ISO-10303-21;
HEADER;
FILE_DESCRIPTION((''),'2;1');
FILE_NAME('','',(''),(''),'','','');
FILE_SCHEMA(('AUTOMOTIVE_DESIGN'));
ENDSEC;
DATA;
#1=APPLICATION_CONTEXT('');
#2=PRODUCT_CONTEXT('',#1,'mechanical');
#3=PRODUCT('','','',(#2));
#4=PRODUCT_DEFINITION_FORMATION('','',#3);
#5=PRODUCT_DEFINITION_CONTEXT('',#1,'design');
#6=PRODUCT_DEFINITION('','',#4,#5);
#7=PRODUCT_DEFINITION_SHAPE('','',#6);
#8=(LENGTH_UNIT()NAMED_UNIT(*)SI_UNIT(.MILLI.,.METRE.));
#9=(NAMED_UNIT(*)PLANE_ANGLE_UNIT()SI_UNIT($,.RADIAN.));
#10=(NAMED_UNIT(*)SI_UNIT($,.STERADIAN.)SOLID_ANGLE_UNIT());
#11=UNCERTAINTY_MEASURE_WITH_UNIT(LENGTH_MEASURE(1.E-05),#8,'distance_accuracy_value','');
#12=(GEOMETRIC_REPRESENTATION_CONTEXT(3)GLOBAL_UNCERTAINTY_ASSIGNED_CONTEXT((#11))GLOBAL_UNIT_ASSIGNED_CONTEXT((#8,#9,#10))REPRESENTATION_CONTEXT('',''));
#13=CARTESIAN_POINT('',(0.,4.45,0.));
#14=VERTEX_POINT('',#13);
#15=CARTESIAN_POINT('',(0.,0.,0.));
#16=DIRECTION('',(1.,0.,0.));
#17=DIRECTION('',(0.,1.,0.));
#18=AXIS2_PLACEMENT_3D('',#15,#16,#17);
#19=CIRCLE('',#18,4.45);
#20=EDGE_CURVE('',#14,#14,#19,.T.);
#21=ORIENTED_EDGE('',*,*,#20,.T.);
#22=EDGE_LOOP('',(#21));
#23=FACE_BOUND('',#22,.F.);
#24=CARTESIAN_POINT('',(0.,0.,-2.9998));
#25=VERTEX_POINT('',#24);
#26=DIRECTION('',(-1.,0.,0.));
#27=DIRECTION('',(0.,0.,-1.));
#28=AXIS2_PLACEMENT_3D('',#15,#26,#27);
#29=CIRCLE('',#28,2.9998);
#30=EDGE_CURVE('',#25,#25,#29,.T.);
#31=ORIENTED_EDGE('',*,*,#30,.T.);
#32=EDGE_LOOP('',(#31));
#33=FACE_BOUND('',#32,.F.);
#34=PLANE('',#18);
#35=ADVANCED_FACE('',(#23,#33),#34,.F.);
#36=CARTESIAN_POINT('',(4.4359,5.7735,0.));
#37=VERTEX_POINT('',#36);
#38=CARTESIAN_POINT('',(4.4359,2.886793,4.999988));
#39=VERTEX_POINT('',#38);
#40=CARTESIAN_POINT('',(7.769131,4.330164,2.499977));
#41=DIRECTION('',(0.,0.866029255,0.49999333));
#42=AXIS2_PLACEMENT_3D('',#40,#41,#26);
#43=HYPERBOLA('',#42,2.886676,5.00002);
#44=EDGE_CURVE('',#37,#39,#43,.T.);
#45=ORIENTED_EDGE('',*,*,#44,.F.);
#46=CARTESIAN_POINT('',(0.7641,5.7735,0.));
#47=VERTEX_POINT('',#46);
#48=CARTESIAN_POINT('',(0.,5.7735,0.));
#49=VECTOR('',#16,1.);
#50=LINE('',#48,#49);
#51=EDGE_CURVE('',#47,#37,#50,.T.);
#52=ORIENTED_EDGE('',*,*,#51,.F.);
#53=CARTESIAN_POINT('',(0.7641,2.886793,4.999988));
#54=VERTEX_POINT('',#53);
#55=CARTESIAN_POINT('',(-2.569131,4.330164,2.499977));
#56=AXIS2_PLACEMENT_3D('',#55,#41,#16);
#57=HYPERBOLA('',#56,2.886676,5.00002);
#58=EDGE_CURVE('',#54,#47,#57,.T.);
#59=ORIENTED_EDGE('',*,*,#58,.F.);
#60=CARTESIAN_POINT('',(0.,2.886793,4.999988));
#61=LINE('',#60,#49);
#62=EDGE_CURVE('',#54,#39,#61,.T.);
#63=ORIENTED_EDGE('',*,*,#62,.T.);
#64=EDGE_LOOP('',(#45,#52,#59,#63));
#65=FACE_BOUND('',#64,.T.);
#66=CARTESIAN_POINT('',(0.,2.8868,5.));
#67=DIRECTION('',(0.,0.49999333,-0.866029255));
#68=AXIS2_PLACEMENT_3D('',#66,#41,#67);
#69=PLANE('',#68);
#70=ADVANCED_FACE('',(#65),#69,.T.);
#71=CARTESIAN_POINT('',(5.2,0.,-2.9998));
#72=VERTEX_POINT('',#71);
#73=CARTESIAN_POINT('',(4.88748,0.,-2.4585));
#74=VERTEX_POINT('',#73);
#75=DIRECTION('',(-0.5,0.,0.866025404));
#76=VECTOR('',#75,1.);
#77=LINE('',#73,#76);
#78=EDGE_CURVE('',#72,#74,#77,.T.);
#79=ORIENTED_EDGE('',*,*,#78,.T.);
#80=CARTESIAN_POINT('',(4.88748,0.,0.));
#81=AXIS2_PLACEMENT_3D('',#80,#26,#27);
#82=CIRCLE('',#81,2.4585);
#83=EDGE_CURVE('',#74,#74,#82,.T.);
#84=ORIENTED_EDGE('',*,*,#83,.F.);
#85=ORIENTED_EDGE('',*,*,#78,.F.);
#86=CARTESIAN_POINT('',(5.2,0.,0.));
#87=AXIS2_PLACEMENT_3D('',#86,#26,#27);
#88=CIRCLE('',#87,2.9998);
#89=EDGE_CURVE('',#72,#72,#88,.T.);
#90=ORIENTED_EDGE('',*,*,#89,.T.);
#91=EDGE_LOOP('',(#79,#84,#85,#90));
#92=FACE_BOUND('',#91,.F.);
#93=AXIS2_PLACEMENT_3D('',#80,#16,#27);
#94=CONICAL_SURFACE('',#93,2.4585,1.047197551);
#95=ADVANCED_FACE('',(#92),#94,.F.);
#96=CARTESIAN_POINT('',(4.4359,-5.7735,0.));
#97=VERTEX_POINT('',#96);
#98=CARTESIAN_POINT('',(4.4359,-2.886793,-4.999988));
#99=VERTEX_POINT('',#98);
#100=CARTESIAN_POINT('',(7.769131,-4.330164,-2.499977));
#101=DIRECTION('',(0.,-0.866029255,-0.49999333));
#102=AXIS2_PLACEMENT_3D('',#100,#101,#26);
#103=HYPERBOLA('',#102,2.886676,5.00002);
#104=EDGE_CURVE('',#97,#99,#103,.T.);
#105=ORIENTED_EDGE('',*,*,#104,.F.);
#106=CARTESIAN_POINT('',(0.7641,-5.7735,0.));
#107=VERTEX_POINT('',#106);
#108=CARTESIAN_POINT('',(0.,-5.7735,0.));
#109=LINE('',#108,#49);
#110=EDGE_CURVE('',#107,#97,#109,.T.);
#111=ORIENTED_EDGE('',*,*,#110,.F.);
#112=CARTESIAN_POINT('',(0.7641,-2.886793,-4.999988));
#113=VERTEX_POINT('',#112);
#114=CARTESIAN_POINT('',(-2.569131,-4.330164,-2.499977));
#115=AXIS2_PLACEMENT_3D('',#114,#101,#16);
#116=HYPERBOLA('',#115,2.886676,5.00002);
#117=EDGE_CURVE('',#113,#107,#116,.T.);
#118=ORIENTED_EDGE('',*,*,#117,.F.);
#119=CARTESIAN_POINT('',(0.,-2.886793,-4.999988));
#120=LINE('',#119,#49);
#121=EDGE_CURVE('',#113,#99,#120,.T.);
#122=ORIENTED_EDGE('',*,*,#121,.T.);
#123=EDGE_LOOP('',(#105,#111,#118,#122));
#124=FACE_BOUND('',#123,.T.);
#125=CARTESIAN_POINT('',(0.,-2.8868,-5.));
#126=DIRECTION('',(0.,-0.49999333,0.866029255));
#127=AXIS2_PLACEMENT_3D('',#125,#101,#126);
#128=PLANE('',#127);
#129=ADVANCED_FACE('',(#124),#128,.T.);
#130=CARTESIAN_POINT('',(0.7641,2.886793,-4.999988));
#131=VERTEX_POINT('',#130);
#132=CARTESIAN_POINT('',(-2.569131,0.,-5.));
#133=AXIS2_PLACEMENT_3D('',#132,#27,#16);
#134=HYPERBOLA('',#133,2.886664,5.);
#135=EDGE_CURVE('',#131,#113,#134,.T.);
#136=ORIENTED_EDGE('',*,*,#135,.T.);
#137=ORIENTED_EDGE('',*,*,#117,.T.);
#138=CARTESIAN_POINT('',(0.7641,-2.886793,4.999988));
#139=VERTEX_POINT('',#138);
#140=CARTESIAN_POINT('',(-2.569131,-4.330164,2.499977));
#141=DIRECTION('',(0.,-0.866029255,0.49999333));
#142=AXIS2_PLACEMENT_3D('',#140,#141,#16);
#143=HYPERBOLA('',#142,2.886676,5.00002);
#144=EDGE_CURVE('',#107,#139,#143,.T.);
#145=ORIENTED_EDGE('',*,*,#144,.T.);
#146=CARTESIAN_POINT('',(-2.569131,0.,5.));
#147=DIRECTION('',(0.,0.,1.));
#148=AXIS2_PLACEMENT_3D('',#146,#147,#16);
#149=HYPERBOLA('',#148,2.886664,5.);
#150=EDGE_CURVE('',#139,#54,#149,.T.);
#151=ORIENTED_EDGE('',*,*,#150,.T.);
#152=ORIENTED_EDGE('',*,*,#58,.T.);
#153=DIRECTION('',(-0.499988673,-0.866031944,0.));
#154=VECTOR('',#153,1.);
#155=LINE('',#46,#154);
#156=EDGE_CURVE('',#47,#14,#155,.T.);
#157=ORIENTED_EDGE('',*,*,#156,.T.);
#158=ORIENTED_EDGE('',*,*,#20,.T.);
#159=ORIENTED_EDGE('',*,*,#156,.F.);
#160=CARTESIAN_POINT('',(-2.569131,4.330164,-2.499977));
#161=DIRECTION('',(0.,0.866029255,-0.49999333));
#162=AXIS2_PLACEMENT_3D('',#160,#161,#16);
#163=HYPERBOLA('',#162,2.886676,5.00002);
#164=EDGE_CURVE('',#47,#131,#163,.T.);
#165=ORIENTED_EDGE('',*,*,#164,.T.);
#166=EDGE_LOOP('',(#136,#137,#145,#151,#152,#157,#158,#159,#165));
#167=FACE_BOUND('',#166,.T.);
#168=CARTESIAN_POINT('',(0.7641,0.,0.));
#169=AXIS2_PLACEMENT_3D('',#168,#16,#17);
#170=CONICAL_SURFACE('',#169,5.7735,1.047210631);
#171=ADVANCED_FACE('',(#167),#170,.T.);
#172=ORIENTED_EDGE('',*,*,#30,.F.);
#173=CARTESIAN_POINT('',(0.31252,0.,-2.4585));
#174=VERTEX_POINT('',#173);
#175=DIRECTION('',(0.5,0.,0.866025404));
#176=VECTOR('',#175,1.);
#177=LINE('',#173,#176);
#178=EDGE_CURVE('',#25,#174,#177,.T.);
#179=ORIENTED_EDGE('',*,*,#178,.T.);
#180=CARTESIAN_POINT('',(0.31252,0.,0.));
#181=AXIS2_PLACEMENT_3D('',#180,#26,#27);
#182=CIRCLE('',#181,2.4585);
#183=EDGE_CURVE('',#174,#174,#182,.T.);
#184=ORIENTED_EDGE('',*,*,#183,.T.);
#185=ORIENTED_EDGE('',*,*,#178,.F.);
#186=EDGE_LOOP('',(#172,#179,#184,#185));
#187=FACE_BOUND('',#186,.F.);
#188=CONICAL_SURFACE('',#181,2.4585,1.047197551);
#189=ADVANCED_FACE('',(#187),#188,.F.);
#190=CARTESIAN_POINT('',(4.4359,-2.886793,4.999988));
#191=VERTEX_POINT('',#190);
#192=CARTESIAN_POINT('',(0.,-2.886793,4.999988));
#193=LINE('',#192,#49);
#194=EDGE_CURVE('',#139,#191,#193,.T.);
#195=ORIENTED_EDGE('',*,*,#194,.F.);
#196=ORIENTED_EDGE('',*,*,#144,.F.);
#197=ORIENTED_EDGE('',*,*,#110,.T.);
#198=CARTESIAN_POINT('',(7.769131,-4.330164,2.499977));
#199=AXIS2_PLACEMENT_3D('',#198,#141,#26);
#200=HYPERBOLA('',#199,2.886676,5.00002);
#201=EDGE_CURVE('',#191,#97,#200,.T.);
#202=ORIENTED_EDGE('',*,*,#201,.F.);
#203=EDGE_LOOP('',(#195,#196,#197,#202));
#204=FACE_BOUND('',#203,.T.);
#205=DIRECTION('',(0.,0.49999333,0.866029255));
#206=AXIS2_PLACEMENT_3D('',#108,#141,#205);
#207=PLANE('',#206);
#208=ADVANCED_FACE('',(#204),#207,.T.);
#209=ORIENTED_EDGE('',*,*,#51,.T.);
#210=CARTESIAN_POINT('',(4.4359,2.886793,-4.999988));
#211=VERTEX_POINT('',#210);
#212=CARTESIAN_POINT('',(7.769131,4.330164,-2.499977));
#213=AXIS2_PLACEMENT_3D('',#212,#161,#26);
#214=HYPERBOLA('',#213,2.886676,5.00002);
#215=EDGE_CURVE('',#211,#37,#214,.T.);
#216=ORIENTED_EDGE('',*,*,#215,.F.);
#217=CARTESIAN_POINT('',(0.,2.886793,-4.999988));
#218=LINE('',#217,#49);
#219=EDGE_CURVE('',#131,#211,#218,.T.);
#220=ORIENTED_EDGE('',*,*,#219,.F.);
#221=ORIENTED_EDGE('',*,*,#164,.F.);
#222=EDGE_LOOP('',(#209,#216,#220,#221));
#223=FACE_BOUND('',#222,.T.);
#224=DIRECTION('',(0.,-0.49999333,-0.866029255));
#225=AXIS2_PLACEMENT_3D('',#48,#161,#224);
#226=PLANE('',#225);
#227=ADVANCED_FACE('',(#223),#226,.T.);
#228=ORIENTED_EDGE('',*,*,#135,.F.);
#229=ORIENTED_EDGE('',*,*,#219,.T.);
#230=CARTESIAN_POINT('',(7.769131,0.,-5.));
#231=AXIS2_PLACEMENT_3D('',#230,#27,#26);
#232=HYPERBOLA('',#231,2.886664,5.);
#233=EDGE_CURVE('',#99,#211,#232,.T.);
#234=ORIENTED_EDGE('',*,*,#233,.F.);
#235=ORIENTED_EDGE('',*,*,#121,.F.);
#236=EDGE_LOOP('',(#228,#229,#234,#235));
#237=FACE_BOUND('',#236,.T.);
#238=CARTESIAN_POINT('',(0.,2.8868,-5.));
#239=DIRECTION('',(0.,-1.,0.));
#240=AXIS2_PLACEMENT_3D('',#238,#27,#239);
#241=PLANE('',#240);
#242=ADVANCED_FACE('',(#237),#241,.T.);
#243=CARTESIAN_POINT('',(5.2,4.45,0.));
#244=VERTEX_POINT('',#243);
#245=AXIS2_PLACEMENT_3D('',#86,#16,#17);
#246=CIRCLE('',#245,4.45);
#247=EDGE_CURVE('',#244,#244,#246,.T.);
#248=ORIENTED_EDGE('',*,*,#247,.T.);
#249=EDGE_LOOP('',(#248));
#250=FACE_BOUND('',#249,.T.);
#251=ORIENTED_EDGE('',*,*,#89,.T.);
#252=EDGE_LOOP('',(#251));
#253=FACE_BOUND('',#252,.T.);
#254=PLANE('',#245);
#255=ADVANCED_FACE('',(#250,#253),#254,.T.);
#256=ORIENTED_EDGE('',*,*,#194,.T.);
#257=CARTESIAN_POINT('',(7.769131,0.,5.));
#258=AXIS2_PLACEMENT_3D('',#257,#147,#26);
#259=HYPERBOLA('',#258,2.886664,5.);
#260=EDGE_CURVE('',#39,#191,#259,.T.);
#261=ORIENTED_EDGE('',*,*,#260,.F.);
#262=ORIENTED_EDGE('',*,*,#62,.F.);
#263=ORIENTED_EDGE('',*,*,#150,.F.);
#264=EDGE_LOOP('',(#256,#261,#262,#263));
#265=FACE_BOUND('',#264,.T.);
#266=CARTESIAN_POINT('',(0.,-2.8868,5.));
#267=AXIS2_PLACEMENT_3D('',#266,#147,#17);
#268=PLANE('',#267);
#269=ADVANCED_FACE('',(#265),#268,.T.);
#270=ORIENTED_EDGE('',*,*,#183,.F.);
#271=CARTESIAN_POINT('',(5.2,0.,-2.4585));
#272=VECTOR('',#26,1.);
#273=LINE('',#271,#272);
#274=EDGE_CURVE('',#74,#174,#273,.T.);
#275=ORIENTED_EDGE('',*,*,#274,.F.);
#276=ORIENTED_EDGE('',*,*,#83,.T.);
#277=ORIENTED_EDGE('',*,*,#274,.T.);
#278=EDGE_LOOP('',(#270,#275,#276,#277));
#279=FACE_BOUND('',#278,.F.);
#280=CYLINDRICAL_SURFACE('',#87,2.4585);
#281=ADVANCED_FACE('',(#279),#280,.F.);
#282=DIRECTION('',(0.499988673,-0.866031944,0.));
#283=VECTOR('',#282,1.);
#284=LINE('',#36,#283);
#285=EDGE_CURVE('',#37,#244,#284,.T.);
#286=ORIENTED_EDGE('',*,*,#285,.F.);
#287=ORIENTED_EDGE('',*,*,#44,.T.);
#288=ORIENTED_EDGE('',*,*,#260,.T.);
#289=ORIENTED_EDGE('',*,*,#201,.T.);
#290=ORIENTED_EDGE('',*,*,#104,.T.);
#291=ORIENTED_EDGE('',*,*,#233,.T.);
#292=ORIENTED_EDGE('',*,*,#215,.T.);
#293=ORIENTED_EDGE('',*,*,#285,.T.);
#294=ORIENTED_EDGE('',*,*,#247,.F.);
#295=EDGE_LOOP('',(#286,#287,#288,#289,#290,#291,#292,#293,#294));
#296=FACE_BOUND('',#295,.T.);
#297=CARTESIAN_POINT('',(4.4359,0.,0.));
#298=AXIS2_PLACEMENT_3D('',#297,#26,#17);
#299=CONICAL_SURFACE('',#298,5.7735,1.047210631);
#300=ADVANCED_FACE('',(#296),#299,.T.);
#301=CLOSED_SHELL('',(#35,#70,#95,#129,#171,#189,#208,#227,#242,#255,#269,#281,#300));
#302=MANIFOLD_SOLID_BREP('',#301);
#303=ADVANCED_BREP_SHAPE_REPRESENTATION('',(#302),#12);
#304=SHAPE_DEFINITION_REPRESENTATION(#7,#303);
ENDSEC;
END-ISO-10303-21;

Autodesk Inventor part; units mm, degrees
ref_plane "YZ Plane" through (0, 0, 0) normal (1, 0, 0) x (0, 1, 0)
ref_plane "XZ Plane" through (0, 0, 0) normal (0, 1, 0) x (-1, 0, 0)
sketch "Sketch1" plane through (0, 0, 0) normal (1, 0, 0) x (0, 1, 0)
  line L0 (-5.7735, 0) -> (-2.8868, 5)
  line L1 (-2.8868, 5) -> (2.8868, 5)
  line L2 (2.8868, 5) -> (5.7735, 0)
  line L3 (5.7735, 0) -> (2.8868, -5)
  line L4 (2.8868, -5) -> (-2.8868, -5)
  line L5 (-2.8868, -5) -> (-5.7735, 0)
  point P0 (0, 0)
  point P1 (0, 0)
  dimension "d0" = 11.547
extrude "Body" add sketch "Sketch1" along normal blind 5.2
sketch "Sketch2" plane through (0, 0, 0) normal (0, 0, 1) x (1, 0, 0)
  line L0 (0, 2.8868) -> (0, 5.7735) projected
  line L1 (0, 5.7735) -> (5.2, 5.7735) projected
  line L2 (5.2, 2.8868) -> (5.2, 5.7735) projected
  line L3 (-1.04, 0) -> (6.24, 0) projected
  line L4 (0.7641, 5.7735) -> (0, 4.45)
  line L5 (4.4359, 5.7735) -> (5.2, 4.45)
  dimension "d3" = 30
  dimension "d4" = 30
  dimension "d5" = 8.9
  dimension "d6" = 8.9
revolve "Chamfer1" cut sketch "Sketch2" angle 360 about axis through (-10, 0, 0) along (1, 0, 0)
sketch "Sketch3" plane through (5.2, 0, 0) normal (1, 0, 0) x (0, 0, -1)
  arc A0 (-0.625, -1.0825) -> (0.625, -1.0825) centre (0, 0) ccw projected
hole "Thread" at (5.2, 0, 0) direction (-1, 0, 0) diameter 4.917 end through all thread size "M6x1" class "6H" standard "ISO Metric profile"
chamfer "Chamfer2" distance 0.5413 angle 30 1 edges at (5.2, 0, 2.4585) measured on face at (5.2, 3.7371, -0.4538)
chamfer "Chamfer3" distance 0.5413 angle 30 1 edges at (0, 0, 2.4585) measured on face at (0, 3.7371, -0.4538)
ref_plane "Work Plane1" through (-10.9812, 0, 0) normal (0, -0.8660254, -0.5) x (1, 0, 0)
equation "\"d0\" = 1.1547 * SW"
equation "\"d1\" = KOH"
equation "\"d3\" = ANG1"
equation "\"d4\" = ANG2"
equation "\"d5\" = SW0"
equation "\"d6\" = SW01"
equation "\"d8\" = -0.5 * GD1 + 0.5 * NND"
equation "\"d40\" = -0.5 * GD1 + 0.5 * NND"
equation "\"d10\" = -0.5 * GD1 + 0.5 * NND"
equation "\"d41\" = -0.5 * GD1 + 0.5 * NND"
equation "\"ANG1\" = 30deg"
equation "\"ANG2\" = 30deg"
equation "\"NND\" = 6"
equation "\"KOH\" = 5.2"
equation "\"SW0\" = 8.9"
equation "\"SW01\" = 8.9"
equation "\"GUL\" = 0.541266 * PTC"
equation "\"THREADDIA\" = 6"
equation "\"TOA\" = 30deg"
equation "\"PTC\" = 1"
equation "\"E0\" = 1.155 * SW"
equation "\"GAL\" = 0.541266 * PTC"
equation "\"SW\" = 10"
equation "\"GD1\" = 4.917468"
properties part number "ISO 4032 - M6" material "Stainless Steel, 440C"
